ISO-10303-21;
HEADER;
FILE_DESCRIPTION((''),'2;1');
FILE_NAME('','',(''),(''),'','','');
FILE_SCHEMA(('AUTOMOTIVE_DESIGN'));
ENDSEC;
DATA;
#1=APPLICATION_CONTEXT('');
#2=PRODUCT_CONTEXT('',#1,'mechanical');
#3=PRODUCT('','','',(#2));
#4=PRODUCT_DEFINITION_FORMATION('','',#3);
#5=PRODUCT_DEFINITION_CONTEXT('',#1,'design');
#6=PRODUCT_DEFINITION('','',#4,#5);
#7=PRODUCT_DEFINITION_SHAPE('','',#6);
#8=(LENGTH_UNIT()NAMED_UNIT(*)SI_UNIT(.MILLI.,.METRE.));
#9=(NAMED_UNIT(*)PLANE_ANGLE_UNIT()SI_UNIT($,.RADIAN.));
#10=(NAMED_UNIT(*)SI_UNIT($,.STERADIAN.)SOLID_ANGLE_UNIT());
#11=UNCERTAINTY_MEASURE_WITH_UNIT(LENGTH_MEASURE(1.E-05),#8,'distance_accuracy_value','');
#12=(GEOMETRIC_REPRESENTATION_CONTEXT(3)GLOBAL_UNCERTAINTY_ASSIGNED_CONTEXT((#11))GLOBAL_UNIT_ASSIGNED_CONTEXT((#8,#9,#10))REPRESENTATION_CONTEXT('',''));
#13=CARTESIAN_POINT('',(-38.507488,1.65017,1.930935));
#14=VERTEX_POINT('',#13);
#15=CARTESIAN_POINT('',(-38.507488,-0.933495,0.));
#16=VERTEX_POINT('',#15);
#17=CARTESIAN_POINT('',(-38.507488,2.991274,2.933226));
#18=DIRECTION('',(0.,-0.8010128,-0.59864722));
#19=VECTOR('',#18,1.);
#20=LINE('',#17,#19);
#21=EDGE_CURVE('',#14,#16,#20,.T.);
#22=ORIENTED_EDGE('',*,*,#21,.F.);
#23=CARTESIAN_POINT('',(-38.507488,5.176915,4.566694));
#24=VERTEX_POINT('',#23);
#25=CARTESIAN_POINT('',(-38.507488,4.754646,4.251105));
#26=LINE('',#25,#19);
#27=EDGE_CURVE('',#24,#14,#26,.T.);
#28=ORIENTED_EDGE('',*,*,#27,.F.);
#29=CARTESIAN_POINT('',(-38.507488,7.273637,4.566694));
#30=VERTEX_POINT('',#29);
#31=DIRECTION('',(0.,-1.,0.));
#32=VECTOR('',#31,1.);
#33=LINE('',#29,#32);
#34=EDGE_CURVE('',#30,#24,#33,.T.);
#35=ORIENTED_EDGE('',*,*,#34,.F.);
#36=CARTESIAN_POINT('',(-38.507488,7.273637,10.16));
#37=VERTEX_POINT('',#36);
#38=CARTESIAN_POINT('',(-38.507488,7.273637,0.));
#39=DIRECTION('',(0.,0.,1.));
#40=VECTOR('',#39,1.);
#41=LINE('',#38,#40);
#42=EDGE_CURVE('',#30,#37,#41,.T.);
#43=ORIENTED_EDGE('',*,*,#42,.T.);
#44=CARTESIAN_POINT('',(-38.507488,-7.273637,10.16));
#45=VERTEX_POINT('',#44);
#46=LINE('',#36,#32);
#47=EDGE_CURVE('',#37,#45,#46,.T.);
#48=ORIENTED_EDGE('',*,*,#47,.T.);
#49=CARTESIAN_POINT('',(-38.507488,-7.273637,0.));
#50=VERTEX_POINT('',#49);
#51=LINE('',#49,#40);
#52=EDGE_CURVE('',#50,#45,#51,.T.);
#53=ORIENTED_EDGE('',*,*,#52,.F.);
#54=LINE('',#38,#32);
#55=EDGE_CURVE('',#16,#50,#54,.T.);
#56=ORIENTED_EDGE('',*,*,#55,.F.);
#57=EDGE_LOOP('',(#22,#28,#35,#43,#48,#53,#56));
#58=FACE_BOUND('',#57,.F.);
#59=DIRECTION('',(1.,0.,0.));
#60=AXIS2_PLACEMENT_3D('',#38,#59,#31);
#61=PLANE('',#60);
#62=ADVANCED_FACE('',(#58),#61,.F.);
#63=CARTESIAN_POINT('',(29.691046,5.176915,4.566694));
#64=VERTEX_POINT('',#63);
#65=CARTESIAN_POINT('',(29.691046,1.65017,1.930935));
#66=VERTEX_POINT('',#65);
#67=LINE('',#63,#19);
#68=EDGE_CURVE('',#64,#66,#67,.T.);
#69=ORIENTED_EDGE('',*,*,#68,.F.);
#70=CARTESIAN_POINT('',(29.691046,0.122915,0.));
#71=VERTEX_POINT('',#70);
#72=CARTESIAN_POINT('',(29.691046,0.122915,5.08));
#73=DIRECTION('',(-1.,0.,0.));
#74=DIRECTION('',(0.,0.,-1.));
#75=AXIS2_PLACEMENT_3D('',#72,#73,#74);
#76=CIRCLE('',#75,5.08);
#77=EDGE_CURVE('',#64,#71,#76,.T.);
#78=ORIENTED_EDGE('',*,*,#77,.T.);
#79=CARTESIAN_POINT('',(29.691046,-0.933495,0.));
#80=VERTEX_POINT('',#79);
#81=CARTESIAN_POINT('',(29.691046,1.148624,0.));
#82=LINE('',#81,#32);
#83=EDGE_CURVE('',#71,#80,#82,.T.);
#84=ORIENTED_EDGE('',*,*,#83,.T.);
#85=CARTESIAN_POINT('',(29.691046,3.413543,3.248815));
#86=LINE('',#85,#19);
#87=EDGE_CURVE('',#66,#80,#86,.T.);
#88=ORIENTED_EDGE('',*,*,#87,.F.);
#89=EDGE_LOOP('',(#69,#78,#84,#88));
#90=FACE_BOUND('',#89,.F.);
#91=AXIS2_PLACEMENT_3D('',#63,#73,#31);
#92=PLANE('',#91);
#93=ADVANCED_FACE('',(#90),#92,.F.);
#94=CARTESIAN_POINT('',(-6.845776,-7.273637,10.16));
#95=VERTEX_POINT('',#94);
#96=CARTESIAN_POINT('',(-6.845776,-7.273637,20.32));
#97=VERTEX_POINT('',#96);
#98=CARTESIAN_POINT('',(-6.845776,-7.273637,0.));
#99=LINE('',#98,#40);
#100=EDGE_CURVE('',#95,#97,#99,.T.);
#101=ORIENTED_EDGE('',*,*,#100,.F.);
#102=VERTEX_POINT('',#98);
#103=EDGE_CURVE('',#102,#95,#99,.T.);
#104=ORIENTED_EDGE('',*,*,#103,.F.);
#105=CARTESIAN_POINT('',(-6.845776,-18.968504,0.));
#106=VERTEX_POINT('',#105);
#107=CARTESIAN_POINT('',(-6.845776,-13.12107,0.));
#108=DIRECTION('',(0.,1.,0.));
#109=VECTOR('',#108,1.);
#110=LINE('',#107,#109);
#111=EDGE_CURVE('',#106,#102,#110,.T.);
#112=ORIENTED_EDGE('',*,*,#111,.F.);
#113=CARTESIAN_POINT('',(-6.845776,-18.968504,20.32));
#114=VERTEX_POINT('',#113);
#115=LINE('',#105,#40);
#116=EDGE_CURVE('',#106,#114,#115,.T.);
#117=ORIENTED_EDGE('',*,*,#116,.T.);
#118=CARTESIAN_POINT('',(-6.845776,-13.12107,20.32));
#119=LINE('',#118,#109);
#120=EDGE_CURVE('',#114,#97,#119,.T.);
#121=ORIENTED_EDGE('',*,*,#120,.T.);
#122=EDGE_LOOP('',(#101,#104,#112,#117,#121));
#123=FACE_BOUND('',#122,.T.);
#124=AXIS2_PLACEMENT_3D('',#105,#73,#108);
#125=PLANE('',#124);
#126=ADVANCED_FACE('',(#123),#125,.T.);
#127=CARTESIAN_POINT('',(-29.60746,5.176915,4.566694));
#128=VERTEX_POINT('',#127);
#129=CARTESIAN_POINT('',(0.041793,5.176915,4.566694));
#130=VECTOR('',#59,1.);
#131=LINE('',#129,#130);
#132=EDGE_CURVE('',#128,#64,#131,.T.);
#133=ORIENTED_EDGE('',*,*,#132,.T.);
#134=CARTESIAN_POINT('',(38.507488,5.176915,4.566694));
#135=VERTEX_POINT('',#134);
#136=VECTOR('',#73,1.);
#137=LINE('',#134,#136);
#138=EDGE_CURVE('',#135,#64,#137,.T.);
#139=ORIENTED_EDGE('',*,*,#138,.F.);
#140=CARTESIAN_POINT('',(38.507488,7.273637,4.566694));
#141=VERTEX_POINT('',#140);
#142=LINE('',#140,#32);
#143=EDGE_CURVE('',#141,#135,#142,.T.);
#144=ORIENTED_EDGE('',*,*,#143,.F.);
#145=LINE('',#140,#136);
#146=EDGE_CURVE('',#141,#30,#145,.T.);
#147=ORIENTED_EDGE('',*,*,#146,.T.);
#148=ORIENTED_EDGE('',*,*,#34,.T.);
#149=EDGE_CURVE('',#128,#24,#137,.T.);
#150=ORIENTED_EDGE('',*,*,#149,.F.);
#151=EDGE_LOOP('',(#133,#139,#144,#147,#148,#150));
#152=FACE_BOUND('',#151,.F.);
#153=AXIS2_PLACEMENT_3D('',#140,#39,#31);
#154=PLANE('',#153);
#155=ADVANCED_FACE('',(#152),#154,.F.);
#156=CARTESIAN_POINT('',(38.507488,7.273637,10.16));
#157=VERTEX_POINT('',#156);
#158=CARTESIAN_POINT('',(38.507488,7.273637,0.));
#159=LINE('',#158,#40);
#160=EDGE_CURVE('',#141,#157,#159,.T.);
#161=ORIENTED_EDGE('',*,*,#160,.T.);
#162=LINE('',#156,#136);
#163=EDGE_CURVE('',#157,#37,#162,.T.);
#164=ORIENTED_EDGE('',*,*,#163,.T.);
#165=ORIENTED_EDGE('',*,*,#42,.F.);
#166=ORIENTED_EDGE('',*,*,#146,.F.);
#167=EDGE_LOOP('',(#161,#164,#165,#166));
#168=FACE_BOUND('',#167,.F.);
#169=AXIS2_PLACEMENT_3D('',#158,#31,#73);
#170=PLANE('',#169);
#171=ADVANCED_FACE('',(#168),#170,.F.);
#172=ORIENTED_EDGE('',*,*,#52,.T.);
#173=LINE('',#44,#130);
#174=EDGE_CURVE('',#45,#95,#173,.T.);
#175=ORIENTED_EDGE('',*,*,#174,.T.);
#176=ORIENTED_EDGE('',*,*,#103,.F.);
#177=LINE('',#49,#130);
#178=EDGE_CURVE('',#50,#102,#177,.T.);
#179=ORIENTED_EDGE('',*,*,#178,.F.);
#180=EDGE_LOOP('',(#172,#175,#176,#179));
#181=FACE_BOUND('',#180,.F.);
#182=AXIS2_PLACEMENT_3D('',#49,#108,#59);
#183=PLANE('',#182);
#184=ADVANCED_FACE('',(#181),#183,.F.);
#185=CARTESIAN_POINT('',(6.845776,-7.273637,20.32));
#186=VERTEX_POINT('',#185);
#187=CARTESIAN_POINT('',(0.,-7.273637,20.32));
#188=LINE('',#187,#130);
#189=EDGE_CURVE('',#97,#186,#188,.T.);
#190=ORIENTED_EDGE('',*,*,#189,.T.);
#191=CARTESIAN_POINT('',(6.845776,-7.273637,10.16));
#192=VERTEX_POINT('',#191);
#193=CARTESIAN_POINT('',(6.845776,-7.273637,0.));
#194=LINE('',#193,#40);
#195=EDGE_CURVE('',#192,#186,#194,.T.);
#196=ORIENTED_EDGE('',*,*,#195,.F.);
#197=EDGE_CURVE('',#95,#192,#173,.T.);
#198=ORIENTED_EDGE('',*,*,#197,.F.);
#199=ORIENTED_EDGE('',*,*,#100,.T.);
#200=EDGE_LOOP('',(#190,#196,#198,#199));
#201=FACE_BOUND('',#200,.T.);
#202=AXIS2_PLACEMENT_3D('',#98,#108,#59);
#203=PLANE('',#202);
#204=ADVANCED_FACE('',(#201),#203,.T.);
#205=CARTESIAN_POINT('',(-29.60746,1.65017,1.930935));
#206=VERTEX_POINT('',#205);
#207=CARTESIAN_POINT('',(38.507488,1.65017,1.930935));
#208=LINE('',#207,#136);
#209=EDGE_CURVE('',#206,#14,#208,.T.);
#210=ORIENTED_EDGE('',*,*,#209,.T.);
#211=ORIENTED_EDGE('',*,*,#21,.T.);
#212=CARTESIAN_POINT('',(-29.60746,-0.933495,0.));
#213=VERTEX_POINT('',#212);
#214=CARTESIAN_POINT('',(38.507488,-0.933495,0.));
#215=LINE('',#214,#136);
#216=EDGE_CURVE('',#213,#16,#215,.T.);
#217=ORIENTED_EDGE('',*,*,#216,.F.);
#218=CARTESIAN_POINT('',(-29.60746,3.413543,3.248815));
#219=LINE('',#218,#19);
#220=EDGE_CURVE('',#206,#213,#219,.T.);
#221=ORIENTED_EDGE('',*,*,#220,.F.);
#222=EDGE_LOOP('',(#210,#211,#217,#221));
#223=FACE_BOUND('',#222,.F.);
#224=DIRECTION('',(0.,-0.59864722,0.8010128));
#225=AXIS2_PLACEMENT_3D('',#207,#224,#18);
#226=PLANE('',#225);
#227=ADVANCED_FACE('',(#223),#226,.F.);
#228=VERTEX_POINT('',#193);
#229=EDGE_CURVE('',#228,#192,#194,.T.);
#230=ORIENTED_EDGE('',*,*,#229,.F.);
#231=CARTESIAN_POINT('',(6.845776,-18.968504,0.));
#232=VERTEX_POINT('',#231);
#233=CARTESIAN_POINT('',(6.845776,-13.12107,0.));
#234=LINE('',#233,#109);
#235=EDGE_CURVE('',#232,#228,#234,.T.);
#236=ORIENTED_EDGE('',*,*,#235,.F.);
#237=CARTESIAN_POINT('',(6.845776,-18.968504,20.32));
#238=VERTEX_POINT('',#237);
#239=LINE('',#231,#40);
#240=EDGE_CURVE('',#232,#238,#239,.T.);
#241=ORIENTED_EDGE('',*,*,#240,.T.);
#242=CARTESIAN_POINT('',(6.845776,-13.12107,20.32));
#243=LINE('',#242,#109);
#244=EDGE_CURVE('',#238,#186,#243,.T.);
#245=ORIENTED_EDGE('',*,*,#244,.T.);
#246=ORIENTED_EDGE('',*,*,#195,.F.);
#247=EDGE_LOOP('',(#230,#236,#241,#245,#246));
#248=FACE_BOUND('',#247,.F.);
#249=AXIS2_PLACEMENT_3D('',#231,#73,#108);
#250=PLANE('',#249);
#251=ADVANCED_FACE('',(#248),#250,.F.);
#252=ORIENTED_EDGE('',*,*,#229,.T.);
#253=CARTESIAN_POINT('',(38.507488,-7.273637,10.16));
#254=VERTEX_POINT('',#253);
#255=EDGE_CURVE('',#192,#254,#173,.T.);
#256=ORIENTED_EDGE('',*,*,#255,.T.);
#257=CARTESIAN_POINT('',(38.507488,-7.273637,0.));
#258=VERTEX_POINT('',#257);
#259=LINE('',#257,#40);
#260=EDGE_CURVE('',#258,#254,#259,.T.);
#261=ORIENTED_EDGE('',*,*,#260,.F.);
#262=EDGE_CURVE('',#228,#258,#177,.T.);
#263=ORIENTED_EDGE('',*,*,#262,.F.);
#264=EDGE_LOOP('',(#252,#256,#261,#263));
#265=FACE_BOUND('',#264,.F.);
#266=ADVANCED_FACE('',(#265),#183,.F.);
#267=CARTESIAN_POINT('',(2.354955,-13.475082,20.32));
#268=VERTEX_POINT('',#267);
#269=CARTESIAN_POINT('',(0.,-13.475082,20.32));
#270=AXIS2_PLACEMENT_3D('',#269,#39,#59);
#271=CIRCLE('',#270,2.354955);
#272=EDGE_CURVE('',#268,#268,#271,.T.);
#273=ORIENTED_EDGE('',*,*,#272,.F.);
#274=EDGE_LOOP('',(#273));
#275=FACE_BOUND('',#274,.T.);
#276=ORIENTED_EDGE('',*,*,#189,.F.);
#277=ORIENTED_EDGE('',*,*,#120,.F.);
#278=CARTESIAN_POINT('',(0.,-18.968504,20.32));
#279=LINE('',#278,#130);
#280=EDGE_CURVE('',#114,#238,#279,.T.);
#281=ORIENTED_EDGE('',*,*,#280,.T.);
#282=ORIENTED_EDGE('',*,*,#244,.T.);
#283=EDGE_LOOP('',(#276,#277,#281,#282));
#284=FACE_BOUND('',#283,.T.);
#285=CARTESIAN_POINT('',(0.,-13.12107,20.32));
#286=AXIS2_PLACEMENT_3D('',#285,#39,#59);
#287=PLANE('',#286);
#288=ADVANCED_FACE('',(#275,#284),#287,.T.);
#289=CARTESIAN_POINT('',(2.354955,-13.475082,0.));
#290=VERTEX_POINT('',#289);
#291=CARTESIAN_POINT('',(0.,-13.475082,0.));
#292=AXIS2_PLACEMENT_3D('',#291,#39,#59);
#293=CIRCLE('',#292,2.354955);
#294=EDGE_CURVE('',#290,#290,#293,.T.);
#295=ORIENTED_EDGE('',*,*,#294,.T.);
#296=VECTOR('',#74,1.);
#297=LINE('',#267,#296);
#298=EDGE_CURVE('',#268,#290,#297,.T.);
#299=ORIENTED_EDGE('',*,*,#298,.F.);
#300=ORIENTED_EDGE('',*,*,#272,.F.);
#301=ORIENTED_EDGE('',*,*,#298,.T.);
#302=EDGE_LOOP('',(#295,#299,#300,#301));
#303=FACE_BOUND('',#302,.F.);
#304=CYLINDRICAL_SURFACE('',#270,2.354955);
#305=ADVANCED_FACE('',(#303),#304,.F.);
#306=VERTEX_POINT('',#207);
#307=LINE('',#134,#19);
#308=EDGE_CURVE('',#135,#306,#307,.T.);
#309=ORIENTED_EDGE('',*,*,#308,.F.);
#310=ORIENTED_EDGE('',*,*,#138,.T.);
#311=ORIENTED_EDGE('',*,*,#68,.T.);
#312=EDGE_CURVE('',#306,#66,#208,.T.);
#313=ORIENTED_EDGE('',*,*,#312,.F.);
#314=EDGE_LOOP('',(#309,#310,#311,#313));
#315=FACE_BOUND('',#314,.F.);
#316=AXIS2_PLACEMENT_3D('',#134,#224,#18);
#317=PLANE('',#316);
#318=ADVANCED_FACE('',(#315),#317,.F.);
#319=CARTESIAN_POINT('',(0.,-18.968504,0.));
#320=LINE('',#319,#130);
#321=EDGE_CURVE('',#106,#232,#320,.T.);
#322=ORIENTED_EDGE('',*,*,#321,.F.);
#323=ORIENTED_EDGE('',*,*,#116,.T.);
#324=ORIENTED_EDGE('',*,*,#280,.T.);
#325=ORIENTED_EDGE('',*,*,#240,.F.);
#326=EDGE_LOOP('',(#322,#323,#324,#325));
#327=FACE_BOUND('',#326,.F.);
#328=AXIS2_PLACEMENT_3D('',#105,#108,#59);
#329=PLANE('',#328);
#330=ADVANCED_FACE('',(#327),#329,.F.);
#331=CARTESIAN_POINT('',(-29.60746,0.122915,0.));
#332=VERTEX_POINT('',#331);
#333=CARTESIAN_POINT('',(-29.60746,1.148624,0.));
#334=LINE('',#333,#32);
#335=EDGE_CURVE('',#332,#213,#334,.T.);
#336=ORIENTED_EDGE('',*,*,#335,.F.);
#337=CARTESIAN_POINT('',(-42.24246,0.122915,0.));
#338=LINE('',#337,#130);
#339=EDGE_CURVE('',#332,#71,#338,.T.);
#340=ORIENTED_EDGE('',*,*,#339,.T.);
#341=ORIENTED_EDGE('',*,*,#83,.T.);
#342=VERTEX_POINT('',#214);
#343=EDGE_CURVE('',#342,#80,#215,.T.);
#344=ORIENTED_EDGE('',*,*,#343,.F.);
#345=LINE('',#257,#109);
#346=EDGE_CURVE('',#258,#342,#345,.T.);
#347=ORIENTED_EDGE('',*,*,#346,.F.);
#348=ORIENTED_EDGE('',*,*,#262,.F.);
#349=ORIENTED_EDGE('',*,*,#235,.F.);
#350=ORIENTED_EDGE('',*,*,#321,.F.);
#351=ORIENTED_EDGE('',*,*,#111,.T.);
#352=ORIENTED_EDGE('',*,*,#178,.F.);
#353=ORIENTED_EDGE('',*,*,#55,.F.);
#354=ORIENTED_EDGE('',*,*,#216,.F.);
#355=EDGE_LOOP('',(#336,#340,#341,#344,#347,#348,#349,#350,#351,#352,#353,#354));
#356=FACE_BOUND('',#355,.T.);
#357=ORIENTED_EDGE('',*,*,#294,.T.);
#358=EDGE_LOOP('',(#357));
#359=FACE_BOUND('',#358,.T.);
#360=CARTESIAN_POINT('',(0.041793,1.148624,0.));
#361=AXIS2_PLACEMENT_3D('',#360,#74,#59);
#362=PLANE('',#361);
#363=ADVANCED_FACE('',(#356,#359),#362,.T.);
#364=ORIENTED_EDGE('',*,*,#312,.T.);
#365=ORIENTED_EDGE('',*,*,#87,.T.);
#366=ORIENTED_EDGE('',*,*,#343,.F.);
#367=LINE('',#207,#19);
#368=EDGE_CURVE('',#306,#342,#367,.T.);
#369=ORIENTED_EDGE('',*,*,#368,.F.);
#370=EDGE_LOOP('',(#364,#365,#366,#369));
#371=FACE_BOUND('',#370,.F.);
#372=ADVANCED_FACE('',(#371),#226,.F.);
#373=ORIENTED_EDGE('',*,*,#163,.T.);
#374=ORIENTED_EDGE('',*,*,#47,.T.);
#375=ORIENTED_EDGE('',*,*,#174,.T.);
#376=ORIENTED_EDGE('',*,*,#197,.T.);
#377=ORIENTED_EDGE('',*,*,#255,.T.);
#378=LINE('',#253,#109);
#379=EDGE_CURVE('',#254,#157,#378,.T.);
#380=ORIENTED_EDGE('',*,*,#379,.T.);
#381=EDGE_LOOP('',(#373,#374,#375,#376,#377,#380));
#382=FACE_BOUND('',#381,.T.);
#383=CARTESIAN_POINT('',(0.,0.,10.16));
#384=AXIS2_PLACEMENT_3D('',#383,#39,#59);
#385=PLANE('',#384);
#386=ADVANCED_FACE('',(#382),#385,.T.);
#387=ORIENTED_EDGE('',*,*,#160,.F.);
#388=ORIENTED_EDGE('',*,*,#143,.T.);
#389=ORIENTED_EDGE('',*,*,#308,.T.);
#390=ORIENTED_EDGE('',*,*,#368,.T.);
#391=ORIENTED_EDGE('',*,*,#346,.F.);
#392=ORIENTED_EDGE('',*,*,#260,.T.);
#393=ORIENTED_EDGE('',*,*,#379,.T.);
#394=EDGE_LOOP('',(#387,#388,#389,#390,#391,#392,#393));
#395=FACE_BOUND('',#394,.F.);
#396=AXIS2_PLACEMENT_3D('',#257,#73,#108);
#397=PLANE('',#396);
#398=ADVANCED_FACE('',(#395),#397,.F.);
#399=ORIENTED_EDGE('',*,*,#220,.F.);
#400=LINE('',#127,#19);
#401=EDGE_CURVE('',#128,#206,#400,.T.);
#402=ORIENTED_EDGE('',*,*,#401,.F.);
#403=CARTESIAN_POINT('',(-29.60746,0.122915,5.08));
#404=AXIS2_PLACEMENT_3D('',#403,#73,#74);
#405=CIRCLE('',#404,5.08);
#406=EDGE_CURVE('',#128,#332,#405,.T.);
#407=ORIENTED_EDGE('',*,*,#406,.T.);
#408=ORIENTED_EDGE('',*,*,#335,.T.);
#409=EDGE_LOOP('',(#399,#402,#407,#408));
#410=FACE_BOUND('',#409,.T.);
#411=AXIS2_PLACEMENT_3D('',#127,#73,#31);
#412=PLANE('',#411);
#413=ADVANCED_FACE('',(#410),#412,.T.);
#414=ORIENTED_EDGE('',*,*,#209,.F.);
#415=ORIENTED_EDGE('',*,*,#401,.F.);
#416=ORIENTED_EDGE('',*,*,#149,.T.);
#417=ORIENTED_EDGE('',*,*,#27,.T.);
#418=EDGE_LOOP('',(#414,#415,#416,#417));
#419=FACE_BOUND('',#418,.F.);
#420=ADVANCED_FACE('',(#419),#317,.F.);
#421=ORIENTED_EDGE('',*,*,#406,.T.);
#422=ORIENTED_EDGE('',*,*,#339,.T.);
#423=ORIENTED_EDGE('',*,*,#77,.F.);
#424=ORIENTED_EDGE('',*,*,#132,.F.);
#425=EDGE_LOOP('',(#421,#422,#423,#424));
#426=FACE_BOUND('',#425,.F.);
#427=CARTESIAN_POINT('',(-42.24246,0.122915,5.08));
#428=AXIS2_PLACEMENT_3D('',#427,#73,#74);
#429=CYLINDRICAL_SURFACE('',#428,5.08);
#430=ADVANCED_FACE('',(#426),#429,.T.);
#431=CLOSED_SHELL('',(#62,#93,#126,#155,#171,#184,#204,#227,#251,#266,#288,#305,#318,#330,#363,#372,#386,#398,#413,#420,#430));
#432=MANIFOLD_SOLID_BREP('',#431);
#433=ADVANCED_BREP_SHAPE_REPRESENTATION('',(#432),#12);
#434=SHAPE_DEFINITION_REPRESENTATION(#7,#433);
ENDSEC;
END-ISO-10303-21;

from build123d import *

# Parameters (mm, degrees)
F1_DEPTH    = 10.16
F0_W        = 13.6915519834
F0_H        = 11.6948671639
F2_DEPTH    = 20.32
F4_DEPTH    = 77.0159752498
F5_W        = 59.2985060066
F5_H        = 8.0565831158
F6_DEPTH    = 4.5666936785
F7_T1_DEPTH = 84.5685063134
F8_R        = 2.3549546022
F9_DEPTH    = 20.321


# Not quite as in the source:
# - a fillet or chamfer that OpenCascade refuses, or shapes differently, is made with other operations: its cross-section is extruded or revolved along the edge and cut away or added


with BuildPart() as f1:
    # F0 (on Top) → F1 (new body)
    with BuildSketch(Plane.XY):
        Polygon((38.5074876249, -7.2736367583), (38.5074876249, 7.2736367583), (-38.5074876249, 7.2736367583), (-38.5074876249, -7.2736367583), (-6.8457759917, -7.2736367583), (6.8457759917, -7.2736367583), align=None)
    extrude(amount=F1_DEPTH)

    # F0 (on Top) → F2 (join)
    with BuildSketch(Plane.XY):
        with Locations((0, -13.1210703403)):
            Rectangle(F0_W, F0_H)
    extrude(amount=F2_DEPTH)

    # F3 (on face) → F4 (cut, through all)
    with BuildSketch(Plane.YZ.offset(38.5074876249)):
        Polygon((5.1769153215, 4.5666936785), (1.6501703067, 1.9309354248), (-0.9334948961, 0), (7.2736367583, 0), (7.2736367583, 4.5666936785), align=None)
    extrude(amount=-F4_DEPTH, mode=Mode.SUBTRACT)

    # F5 (on face) → F6 (join, through all)
    with BuildSketch(Plane(origin=(0, 0, 4.5666936785), x_dir=(1, 0, 0), z_dir=(0, 0, -1))):
        with Locations((0.0417931005, -1.1486237636)):
            Rectangle(F5_W, F5_H)
    extrude(amount=F6_DEPTH)

    # F7: fillet of radius 5.08 on 1 edges, made by hand

    # F7_s2 → F7_t1 (cut)
    with BuildSketch(Plane.YZ.offset(-42.2424600562)):
        with BuildLine():
            ThreePointArc((0.1229152601, 0), (3.5287047345, 1.3107828324), (5.1769153215, 4.5666936785))
            Line((5.1769153215, 4.5666936785), (5.1769153215, 0))
            Line((5.1769153215, 0), (0.1229152601, 0))
        make_face()
    extrude(amount=F7_T1_DEPTH, mode=Mode.SUBTRACT)

    # F8 (on face) → F9 (cut, through all)
    with BuildSketch(Plane.XY.offset(20.32)):
        with Locations((0, -13.4750818834)):
            Circle(F8_R)
    extrude(amount=-F9_DEPTH, mode=Mode.SUBTRACT)


solid = f1.part
